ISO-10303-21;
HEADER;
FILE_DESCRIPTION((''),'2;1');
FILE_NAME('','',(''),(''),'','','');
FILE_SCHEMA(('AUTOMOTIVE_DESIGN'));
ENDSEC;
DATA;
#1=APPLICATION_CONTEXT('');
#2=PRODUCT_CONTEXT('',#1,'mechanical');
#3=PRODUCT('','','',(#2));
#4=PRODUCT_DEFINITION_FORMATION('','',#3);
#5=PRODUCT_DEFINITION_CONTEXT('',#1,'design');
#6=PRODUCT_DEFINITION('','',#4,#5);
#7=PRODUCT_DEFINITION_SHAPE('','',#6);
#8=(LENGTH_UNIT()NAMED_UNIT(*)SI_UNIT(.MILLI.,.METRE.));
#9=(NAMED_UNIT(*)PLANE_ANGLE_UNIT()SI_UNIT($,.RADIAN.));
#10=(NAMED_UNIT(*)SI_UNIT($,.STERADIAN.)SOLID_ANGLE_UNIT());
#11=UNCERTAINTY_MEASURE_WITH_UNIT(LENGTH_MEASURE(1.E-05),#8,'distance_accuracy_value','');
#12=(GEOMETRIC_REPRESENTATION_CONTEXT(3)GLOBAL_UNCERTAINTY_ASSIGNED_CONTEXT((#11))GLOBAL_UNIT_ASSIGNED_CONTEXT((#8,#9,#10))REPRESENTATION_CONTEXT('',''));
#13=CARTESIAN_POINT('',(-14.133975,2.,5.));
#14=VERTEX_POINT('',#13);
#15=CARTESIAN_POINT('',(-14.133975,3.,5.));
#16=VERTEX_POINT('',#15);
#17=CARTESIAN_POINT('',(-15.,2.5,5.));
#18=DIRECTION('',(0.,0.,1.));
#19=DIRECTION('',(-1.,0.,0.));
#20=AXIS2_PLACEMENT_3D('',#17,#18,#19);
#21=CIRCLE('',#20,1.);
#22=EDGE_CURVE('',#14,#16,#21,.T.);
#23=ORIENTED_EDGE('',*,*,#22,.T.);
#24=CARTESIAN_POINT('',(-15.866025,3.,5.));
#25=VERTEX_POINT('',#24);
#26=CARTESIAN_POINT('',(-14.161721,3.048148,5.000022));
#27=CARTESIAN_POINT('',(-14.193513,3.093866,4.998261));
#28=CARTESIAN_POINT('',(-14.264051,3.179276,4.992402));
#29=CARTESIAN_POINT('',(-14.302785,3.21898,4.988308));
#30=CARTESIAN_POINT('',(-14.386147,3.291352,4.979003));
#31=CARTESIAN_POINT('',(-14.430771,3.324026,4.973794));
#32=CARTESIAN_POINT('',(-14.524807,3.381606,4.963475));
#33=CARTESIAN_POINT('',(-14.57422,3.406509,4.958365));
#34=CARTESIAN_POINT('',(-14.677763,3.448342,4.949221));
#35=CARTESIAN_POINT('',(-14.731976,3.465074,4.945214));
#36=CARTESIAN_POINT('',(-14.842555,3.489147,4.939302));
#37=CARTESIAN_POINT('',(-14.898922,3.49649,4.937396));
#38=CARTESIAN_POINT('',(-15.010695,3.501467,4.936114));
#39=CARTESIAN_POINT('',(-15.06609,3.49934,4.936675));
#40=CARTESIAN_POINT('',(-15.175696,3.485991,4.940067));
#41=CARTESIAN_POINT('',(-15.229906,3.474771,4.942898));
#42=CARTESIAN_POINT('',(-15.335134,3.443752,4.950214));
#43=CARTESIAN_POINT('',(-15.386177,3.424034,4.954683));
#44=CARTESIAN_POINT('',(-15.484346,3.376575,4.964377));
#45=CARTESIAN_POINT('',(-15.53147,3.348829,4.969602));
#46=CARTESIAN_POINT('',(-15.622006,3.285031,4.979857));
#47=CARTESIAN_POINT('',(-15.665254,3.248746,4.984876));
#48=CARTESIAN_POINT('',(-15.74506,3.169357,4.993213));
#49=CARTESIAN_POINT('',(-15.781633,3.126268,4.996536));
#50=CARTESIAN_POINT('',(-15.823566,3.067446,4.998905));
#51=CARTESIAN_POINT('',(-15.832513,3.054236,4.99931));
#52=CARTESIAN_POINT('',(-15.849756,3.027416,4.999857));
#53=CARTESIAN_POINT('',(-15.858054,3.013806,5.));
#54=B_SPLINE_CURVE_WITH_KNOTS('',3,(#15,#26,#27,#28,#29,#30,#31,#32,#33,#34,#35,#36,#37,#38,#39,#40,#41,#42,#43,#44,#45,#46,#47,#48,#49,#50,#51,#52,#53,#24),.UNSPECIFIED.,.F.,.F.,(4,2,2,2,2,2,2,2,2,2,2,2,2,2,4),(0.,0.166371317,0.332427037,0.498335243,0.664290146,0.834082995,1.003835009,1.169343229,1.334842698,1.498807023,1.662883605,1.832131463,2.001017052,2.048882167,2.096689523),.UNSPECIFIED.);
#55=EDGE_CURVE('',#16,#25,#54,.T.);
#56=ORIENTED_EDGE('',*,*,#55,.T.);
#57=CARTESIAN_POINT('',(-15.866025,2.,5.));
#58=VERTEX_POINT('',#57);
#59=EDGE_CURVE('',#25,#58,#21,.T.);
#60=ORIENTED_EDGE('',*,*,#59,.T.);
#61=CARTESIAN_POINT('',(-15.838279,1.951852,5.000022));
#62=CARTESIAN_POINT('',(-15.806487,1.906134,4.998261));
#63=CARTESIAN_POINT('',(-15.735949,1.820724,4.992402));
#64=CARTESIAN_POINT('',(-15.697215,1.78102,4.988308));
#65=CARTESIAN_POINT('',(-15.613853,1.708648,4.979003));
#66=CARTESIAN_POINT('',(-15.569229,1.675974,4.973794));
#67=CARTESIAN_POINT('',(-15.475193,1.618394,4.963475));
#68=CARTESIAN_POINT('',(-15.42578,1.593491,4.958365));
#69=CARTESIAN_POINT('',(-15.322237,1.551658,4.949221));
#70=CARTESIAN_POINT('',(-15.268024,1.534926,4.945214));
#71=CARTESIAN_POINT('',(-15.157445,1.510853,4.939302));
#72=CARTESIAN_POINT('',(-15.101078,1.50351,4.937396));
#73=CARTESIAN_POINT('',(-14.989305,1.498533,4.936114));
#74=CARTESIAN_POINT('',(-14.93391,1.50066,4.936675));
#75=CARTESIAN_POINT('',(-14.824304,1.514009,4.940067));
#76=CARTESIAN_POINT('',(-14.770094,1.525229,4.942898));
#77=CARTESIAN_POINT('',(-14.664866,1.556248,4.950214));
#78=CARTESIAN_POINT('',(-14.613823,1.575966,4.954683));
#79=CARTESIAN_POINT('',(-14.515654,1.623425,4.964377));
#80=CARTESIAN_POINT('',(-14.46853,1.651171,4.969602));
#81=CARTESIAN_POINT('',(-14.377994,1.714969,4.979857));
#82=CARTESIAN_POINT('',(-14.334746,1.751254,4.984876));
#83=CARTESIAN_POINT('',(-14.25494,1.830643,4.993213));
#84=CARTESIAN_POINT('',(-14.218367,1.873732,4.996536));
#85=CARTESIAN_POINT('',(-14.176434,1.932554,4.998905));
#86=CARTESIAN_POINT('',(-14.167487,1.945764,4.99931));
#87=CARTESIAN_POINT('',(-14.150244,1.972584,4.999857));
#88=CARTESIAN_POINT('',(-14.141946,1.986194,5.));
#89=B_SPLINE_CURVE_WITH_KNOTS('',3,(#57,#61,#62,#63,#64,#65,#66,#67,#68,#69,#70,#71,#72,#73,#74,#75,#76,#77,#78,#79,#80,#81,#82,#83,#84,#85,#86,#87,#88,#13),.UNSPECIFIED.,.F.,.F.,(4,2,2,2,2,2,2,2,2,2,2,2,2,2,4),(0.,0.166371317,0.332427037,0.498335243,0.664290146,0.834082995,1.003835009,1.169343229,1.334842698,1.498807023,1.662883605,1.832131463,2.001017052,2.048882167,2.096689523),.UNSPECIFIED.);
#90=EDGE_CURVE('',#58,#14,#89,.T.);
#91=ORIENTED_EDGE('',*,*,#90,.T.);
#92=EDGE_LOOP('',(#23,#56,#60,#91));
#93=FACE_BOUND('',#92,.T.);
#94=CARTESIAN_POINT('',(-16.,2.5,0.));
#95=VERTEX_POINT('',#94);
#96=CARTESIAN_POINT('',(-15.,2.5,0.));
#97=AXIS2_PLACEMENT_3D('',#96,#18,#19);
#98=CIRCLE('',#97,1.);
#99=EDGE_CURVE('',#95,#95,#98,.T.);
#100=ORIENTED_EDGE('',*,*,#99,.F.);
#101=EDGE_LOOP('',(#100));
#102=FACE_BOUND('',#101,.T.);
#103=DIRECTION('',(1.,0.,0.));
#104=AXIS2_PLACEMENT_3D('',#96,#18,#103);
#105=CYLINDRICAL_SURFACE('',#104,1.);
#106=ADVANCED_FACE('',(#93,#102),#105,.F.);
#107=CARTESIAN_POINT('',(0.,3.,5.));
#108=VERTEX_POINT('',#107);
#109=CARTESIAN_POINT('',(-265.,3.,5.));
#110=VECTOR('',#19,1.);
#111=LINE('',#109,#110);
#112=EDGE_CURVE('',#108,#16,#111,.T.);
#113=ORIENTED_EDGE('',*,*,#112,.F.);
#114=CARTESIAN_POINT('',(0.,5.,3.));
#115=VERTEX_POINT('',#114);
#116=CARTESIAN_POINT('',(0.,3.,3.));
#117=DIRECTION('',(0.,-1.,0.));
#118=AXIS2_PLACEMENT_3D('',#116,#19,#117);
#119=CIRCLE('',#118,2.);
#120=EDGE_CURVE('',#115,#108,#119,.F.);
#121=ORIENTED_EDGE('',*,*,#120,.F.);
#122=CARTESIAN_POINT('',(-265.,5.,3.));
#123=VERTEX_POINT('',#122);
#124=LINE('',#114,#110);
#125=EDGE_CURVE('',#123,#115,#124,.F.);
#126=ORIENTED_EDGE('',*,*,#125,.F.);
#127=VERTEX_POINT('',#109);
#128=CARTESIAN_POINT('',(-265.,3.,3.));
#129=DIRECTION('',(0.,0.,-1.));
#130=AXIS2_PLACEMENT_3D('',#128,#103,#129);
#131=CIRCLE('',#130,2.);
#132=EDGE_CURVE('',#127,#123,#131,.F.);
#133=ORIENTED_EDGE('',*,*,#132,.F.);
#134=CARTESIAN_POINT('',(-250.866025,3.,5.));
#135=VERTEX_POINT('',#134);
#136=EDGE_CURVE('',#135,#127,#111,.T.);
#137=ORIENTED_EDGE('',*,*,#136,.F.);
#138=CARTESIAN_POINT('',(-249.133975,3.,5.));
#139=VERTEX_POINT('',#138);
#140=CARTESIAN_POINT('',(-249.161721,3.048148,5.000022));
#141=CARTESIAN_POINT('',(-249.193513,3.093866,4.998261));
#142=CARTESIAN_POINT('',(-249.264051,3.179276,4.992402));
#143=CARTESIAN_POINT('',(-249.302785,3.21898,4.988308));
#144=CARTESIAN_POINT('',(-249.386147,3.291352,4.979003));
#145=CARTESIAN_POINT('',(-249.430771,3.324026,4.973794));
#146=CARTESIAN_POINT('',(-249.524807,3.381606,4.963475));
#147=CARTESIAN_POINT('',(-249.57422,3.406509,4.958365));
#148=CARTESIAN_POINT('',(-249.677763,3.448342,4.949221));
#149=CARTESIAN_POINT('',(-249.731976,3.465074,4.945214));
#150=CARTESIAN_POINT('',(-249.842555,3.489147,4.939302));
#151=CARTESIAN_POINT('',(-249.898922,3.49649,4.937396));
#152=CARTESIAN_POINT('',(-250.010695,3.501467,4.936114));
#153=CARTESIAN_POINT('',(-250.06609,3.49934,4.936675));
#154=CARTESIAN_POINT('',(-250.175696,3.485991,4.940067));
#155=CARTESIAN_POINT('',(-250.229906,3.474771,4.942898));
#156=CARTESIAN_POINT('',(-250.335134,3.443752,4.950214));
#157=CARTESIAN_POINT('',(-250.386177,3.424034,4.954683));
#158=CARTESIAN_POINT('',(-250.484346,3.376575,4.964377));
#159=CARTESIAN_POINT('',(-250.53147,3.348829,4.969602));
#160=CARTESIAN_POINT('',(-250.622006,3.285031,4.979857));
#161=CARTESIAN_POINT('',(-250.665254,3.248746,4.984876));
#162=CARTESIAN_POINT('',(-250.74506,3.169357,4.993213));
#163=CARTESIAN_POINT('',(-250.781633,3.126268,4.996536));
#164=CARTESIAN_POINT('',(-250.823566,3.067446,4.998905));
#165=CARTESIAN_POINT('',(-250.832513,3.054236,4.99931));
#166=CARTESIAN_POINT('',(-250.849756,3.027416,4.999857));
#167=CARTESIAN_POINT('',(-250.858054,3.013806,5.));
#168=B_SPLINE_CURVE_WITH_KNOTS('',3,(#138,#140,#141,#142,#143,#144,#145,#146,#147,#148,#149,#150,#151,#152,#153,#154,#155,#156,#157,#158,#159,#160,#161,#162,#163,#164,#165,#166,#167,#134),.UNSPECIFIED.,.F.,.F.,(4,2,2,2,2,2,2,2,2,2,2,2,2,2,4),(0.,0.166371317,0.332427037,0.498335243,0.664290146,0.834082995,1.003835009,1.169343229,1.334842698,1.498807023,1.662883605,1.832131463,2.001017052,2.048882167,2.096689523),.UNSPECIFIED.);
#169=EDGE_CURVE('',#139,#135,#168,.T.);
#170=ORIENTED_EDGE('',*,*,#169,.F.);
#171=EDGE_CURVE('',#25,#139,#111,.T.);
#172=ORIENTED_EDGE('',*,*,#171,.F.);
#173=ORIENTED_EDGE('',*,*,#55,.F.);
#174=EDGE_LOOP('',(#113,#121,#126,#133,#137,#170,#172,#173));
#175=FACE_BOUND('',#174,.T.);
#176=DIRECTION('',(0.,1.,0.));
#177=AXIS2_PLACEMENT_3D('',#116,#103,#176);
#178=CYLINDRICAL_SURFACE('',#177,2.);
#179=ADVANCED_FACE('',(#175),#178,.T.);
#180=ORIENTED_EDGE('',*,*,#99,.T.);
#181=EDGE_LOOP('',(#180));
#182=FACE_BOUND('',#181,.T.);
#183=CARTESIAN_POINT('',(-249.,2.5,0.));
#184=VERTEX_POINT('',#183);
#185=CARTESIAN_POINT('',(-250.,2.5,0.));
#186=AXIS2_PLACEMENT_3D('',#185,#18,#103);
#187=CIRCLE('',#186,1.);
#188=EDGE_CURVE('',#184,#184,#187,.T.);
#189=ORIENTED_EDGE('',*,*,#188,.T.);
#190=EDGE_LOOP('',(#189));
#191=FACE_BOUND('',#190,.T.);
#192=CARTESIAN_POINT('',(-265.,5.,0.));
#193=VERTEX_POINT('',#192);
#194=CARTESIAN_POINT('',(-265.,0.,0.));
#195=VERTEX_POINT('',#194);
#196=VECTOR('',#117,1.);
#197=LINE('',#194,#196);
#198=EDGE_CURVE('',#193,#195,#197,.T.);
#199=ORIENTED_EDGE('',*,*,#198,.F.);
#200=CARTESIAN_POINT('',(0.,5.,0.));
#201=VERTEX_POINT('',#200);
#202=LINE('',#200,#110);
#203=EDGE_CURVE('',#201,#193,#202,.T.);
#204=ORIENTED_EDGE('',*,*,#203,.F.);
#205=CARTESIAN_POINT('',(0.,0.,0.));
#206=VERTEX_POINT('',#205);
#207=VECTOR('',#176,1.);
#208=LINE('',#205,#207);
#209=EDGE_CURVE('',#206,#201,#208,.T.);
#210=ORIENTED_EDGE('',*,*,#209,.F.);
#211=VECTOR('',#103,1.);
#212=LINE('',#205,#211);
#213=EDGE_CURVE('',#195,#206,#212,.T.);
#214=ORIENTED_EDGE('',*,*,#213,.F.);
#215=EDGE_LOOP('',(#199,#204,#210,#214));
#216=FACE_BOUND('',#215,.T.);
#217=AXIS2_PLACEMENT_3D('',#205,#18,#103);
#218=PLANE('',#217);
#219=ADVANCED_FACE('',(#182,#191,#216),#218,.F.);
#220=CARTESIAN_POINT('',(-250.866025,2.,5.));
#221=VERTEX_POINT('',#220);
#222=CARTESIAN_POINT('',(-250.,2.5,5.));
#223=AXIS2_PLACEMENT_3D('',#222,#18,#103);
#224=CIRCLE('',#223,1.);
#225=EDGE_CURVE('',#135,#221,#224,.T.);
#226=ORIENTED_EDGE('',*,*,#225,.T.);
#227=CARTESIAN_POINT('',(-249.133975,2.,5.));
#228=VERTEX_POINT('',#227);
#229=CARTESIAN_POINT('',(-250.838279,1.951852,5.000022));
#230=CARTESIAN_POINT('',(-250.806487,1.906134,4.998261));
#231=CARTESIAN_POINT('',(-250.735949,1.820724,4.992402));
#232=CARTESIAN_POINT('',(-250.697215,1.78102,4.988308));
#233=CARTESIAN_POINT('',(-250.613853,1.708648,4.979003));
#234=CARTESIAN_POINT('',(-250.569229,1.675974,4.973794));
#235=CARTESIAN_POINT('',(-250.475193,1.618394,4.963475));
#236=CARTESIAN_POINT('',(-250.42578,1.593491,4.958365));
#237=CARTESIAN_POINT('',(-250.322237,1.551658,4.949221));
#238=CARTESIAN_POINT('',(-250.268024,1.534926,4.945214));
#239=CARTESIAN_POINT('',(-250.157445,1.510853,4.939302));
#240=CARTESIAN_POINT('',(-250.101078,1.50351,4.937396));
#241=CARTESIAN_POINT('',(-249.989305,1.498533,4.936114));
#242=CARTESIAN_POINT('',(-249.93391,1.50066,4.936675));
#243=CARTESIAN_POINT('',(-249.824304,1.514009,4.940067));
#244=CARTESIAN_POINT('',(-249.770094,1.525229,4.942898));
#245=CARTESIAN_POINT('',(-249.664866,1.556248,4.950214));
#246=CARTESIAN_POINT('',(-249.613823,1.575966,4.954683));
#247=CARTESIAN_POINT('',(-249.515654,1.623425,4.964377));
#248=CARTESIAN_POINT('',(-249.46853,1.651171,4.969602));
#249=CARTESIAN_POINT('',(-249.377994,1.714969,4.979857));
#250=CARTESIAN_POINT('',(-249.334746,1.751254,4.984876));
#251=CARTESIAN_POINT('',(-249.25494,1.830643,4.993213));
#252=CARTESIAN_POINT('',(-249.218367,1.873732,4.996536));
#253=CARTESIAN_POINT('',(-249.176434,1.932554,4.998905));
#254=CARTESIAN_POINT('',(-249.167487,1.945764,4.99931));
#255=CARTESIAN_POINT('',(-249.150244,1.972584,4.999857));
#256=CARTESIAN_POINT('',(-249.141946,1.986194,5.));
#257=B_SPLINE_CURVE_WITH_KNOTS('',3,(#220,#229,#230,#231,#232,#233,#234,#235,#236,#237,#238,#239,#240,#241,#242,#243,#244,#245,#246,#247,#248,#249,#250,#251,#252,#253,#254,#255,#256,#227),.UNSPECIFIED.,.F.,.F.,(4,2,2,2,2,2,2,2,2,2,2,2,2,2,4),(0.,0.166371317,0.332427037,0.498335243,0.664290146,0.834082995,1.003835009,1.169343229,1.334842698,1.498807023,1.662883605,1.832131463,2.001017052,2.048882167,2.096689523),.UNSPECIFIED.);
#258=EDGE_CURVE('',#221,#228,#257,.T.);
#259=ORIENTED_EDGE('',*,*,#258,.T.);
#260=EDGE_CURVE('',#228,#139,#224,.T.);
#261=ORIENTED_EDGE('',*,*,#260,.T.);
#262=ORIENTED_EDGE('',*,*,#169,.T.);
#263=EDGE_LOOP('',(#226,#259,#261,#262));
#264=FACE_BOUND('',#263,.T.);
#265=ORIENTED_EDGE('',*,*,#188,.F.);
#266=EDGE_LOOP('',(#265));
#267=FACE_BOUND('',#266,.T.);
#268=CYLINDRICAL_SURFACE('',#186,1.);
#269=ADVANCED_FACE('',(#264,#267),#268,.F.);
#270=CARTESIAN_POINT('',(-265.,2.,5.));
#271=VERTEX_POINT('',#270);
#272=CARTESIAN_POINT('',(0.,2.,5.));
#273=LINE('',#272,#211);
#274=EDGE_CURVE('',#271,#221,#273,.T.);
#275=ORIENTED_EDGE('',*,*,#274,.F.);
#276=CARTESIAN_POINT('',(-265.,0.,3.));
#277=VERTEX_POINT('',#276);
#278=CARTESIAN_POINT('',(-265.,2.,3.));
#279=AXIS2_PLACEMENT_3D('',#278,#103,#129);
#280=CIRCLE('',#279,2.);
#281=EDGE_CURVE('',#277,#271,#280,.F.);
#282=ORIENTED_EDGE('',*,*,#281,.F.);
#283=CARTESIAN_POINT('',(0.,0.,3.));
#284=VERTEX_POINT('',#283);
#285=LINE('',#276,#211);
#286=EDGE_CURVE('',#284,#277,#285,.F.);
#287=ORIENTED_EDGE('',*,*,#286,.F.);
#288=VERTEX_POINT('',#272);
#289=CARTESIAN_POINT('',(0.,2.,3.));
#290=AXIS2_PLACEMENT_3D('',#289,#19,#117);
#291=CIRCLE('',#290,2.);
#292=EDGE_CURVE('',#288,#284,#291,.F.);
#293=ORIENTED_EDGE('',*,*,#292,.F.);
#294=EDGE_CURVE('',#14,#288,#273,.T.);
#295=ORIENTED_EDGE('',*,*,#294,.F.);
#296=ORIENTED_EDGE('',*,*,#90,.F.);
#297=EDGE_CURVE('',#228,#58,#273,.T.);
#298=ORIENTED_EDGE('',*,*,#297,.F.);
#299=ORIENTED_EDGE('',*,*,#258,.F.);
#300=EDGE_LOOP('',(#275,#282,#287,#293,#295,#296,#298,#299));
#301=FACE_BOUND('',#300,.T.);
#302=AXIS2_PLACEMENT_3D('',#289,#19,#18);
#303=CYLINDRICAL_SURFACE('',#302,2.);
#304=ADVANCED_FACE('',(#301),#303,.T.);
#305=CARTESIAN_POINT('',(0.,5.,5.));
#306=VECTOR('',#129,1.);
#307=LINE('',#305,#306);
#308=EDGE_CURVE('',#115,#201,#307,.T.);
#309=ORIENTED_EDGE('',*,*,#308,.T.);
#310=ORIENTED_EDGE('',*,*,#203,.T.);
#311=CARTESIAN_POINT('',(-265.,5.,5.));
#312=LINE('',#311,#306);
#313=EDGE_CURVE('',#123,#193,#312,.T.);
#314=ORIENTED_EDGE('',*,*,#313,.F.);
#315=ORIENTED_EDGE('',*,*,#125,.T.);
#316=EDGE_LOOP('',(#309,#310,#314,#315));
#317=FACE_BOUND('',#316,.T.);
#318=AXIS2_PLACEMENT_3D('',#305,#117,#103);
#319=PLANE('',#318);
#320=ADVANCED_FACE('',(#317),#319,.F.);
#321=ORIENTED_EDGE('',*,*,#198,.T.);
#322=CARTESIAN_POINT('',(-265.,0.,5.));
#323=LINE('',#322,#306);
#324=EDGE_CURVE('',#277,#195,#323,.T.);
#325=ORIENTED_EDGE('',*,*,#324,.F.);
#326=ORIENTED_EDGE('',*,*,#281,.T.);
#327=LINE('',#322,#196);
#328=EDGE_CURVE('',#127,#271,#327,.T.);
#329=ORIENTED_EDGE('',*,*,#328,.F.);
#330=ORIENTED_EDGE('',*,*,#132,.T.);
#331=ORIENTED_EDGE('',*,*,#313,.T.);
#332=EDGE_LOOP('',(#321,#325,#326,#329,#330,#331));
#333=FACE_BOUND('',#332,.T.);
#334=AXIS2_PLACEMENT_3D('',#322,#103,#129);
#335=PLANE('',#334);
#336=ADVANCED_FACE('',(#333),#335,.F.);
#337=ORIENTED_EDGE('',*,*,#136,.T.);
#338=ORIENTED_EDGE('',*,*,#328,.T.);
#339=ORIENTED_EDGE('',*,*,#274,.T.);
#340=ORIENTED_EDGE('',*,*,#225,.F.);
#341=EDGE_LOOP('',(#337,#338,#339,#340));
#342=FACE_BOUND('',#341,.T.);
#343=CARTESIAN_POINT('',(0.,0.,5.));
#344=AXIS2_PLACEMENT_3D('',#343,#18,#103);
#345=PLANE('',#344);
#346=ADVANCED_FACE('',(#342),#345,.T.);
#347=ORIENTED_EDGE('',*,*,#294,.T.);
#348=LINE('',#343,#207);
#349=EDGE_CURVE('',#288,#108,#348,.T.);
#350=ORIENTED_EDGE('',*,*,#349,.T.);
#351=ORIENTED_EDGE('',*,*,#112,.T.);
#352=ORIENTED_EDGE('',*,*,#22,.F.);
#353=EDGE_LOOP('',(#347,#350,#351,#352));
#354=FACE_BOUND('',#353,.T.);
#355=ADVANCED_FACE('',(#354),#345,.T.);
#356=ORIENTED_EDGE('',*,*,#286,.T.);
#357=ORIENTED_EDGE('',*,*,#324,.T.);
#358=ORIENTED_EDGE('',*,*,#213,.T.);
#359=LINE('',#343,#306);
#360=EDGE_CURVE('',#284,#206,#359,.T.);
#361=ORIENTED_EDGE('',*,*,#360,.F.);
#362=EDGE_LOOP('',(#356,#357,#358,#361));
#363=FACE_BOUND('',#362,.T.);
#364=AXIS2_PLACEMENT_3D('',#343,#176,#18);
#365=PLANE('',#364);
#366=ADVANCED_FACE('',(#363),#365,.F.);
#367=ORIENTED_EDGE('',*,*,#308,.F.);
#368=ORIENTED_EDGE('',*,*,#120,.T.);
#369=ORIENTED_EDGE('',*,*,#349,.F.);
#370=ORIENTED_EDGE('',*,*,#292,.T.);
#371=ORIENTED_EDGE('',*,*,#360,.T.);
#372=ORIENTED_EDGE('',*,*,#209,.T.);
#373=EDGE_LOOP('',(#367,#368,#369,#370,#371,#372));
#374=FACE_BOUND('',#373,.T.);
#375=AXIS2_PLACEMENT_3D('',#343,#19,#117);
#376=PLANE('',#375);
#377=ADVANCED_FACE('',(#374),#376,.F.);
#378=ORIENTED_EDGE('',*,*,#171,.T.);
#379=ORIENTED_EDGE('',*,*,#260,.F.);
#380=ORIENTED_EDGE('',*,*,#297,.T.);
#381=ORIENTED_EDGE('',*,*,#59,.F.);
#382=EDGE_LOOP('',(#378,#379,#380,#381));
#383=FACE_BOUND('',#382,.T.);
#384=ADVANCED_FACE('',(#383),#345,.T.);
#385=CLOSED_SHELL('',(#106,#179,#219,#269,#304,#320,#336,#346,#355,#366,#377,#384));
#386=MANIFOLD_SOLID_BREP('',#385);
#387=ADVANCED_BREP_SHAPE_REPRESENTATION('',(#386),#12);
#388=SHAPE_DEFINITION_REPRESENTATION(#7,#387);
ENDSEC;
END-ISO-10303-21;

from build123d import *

# Parameters (mm, degrees)
SKETCH1_W           = 265
SKETCH1_H           = 5
BOSS_EXTRUDE1_DEPTH = 5
SKETCH2_R           = 1
CUT_EXTRUDE1_DEPTH  = 266.094322836
FILLET1_R           = 2


with BuildPart() as part:
    # Sketch1 → Boss-Extrude1 (new body)
    with BuildSketch(Plane.XY):
        with Locations((-132.5, 2.5)):
            Rectangle(SKETCH1_W, SKETCH1_H)
    extrude(amount=BOSS_EXTRUDE1_DEPTH)

    # Sketch2 → Cut-Extrude1 (cut, through all)
    with BuildSketch(Plane.XY.offset(5)):
        with Locations((-250, 2.5)):
            Circle(SKETCH2_R)
        with Locations(Location((-15, 2.5, 0), (0, 0, 180))):
            Circle(SKETCH2_R)
    extrude(amount=-CUT_EXTRUDE1_DEPTH, mode=Mode.SUBTRACT)

    # Fillet1
    # the kernel refuses this fillet: 2 mm, written as the material it takes off along each edge
    with BuildSketch(Plane(origin=(5, 0, 5), x_dir=(0, 0, -1), z_dir=(-1, 0, 0))) as fillet1_piece_1:
        with BuildLine():
            CenterArc((FILLET1_R, -FILLET1_R), FILLET1_R, 90, 90)
            Line((0, -FILLET1_R), (0, 0))
            Line((0, 0), (FILLET1_R, 0))
        make_face()
    extrude(amount=275, mode=Mode.SUBTRACT)
    with BuildSketch(Plane(origin=(-270, 5, 5), x_dir=(0, -1, 0), z_dir=(1, 0, 0))) as fillet1_piece_2:
        with BuildLine():
            CenterArc((FILLET1_R, FILLET1_R), FILLET1_R, 180, 90)
            Line((0, FILLET1_R), (0, 0))
            Line((0, 0), (FILLET1_R, 0))
        make_face()
    extrude(amount=275, mode=Mode.SUBTRACT)


solid = part.part
